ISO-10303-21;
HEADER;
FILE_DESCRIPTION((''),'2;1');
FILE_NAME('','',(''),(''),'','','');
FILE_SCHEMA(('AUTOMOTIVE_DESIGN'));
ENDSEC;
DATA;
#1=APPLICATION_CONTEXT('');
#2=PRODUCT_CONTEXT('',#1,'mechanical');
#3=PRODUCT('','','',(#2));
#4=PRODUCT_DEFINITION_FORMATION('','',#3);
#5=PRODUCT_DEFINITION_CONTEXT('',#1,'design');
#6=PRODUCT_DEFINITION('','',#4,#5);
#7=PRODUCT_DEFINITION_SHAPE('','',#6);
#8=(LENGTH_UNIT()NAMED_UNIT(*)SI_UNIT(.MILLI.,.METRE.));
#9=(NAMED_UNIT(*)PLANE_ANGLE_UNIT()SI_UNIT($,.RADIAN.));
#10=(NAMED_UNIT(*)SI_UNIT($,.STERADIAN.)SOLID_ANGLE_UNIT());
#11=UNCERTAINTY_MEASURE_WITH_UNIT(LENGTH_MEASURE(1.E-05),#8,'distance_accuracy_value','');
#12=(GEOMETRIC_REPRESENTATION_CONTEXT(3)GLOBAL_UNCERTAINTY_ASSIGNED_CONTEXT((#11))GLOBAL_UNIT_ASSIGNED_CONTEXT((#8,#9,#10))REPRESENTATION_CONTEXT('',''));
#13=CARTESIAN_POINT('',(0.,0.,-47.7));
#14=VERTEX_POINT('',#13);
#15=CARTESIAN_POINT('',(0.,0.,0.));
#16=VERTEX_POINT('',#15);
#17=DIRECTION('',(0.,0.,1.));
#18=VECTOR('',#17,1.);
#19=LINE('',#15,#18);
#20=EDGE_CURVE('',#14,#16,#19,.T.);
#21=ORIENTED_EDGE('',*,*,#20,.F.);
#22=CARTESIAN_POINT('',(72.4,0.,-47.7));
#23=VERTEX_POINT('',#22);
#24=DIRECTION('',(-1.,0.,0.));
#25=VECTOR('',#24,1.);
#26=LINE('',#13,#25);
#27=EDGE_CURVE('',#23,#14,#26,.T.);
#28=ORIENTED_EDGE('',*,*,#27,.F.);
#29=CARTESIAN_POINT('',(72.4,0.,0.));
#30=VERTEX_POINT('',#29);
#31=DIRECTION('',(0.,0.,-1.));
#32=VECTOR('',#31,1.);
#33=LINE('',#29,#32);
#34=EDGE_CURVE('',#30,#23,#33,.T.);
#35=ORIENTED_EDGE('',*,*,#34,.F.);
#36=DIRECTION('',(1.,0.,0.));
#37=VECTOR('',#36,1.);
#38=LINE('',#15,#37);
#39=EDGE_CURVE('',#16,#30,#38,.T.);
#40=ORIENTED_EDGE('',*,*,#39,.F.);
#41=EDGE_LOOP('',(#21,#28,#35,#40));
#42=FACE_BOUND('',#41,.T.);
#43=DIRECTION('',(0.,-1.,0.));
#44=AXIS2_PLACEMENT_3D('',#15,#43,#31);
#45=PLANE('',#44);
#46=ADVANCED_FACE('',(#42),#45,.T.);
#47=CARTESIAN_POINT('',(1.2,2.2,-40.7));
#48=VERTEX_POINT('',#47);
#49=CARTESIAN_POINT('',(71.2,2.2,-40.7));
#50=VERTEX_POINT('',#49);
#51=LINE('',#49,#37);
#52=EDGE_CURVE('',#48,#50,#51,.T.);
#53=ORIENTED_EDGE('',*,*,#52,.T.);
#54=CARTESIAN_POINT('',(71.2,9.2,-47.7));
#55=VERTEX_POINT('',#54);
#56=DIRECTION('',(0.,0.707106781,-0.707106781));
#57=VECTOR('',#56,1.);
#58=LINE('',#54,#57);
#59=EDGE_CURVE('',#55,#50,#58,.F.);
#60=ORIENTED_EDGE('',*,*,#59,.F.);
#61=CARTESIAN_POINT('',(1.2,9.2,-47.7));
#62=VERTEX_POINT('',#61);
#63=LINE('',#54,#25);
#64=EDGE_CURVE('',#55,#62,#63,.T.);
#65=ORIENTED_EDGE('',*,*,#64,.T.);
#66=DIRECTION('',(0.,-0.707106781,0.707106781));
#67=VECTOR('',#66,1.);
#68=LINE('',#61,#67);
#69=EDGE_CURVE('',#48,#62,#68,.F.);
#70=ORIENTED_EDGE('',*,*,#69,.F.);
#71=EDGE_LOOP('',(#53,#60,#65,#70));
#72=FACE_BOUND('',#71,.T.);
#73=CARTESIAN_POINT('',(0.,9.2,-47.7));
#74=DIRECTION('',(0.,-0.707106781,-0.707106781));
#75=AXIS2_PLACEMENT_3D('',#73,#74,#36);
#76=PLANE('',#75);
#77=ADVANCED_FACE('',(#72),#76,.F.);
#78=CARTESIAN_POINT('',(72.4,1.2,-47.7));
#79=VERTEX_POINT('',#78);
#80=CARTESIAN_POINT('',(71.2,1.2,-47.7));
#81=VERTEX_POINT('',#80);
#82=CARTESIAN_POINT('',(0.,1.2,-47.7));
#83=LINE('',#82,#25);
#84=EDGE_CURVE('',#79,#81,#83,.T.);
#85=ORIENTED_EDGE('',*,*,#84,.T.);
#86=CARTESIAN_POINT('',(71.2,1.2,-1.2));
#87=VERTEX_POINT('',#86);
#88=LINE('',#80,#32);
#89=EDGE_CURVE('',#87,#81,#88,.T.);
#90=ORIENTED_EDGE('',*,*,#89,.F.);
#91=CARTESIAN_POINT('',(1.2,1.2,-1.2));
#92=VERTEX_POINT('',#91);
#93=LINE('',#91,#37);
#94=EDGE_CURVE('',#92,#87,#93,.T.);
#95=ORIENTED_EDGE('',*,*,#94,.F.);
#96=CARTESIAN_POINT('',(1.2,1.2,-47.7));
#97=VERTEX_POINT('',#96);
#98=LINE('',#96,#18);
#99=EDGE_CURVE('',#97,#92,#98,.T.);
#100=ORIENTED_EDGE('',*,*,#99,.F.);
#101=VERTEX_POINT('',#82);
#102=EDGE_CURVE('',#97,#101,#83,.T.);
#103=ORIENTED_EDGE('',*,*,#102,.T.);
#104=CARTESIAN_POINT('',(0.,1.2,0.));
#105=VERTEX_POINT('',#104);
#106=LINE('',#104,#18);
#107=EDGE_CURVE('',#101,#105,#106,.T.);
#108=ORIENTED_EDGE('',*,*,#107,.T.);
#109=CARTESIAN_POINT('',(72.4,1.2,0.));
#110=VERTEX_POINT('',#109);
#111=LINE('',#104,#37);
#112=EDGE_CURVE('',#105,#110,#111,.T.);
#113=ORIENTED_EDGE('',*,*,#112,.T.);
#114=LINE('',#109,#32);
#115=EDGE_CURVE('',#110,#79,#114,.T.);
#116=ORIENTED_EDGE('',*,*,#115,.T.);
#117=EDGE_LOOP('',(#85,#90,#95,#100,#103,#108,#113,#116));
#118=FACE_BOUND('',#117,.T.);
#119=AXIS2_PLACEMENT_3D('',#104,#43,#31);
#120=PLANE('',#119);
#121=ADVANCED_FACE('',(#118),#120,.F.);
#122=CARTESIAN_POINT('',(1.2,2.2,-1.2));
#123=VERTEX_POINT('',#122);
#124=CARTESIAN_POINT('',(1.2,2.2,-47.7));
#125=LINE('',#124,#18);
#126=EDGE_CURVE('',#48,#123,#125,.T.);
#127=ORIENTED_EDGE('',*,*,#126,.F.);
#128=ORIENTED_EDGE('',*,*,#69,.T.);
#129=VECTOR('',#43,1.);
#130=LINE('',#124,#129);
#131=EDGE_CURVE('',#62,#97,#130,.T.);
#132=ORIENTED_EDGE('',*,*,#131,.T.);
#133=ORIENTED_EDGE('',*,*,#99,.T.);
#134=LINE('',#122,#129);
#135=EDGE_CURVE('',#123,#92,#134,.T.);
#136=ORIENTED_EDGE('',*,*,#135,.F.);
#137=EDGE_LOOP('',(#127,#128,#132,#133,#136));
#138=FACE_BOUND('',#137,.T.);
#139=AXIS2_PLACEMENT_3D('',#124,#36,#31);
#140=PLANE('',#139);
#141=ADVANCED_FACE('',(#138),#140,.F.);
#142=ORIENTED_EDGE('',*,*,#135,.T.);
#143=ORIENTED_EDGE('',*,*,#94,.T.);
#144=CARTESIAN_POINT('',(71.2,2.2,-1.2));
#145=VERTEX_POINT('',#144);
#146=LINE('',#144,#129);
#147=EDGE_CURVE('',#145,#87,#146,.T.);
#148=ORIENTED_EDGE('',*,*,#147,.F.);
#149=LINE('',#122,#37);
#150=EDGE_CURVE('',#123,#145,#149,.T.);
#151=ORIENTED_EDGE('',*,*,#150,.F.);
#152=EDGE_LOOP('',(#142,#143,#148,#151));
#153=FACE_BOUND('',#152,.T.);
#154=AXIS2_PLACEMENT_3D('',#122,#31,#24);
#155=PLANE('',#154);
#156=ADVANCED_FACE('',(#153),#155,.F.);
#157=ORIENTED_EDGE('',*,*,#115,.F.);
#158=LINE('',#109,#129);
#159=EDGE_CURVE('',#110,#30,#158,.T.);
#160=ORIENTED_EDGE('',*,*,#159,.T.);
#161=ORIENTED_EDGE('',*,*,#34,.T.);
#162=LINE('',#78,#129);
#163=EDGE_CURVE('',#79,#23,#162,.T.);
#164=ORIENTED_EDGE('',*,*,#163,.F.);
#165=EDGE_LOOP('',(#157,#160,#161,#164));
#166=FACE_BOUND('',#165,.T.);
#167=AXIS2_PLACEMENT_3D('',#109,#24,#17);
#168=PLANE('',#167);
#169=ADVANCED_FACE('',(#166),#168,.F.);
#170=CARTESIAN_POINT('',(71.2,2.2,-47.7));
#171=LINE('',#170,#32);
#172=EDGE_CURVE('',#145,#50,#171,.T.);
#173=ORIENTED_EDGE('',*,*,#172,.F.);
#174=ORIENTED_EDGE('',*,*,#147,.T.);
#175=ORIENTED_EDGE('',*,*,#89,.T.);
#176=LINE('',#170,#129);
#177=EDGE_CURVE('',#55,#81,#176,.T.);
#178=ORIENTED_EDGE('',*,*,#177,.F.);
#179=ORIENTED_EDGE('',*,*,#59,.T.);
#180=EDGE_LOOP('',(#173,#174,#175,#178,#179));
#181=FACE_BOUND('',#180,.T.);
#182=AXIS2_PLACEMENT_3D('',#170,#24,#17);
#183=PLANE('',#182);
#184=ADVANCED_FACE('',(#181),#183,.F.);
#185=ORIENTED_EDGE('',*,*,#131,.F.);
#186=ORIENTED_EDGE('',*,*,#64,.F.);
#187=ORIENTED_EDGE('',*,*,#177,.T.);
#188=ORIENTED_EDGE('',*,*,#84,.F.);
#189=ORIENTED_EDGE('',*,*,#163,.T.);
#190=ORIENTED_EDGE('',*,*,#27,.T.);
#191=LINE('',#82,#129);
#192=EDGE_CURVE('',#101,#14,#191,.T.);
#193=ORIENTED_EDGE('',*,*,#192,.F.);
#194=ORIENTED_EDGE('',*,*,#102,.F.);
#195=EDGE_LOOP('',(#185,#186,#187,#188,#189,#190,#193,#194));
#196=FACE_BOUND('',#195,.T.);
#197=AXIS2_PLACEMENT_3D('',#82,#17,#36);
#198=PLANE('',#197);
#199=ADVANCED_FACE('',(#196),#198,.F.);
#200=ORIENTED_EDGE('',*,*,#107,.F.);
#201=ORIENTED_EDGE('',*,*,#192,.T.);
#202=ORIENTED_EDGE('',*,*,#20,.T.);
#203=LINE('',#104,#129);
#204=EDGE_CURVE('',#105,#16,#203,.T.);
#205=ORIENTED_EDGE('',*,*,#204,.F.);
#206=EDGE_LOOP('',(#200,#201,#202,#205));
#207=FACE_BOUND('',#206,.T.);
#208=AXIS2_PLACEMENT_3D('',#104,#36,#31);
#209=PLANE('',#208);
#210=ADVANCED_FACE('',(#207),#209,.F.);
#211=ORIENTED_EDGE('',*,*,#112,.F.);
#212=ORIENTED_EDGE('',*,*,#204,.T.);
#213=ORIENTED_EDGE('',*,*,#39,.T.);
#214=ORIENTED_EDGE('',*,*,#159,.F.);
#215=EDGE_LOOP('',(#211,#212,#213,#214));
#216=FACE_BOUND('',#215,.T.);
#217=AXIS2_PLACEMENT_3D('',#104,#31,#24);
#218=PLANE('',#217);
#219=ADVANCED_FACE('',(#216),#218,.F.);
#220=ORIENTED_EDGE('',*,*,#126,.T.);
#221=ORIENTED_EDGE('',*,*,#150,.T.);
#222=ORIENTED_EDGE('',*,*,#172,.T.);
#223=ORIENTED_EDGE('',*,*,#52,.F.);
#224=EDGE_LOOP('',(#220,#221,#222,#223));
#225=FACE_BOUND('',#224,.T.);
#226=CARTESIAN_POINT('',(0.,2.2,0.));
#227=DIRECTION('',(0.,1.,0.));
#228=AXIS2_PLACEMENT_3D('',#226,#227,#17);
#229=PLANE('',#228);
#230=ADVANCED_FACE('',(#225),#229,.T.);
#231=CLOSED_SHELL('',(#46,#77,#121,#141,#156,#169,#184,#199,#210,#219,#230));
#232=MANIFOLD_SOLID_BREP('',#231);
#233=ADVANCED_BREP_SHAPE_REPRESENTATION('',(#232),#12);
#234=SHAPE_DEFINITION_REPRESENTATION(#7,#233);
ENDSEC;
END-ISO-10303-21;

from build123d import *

# Parameters (mm, degrees)
SKICA2_W                = 72.4
SKICA2_H                = 47.7
P_IDAT_VYSUNUT_M1_DEPTH = 1.2
SKICA3_W                = 70
SKICA3_H                = 46.5
P_IDAT_VYSUNUT_M2_DEPTH = 1
SKICA4_W                = 70
SKICA4_H                = 7
P_IDAT_VYSUNUT_M3_DEPTH = 7
ZKOSEN_2_SIZE           = 7


with BuildPart() as part:
    # Skica2 → Přidat vysunutím1 (new body)
    with BuildSketch(Plane(origin=(0, 0, 0), x_dir=(1, 0, 0), z_dir=(0, 1, 0))):
        with Locations((36.2, 23.85)):
            Rectangle(SKICA2_W, SKICA2_H)
    extrude(amount=P_IDAT_VYSUNUT_M1_DEPTH)

    # Skica3 → Přidat vysunutím2 (add)
    with BuildSketch(Plane(origin=(0, 1.2, 0), x_dir=(1, 0, 0), z_dir=(0, 1, 0))):
        with Locations((36.2, 24.45)):
            Rectangle(SKICA3_W, SKICA3_H)
    extrude(amount=P_IDAT_VYSUNUT_M2_DEPTH)

    # Skica4 → Přidat vysunutím3 (add)
    with BuildSketch(Plane(origin=(0, 2.2, 0), x_dir=(1, 0, 0), z_dir=(0, 1, 0))):
        with Locations((36.2, 44.2)):
            Rectangle(SKICA4_W, SKICA4_H)
    extrude(amount=P_IDAT_VYSUNUT_M3_DEPTH)

    # Zkosení2
    zkosen_2_edges = [part.edges().sort_by_distance(p)[0] for p in [
        (36.2, 9.2, -40.7),
    ]]
    chamfer(zkosen_2_edges, length=ZKOSEN_2_SIZE - 0.0001)  # a hair under: the kernel refuses the full size


solid = part.part
